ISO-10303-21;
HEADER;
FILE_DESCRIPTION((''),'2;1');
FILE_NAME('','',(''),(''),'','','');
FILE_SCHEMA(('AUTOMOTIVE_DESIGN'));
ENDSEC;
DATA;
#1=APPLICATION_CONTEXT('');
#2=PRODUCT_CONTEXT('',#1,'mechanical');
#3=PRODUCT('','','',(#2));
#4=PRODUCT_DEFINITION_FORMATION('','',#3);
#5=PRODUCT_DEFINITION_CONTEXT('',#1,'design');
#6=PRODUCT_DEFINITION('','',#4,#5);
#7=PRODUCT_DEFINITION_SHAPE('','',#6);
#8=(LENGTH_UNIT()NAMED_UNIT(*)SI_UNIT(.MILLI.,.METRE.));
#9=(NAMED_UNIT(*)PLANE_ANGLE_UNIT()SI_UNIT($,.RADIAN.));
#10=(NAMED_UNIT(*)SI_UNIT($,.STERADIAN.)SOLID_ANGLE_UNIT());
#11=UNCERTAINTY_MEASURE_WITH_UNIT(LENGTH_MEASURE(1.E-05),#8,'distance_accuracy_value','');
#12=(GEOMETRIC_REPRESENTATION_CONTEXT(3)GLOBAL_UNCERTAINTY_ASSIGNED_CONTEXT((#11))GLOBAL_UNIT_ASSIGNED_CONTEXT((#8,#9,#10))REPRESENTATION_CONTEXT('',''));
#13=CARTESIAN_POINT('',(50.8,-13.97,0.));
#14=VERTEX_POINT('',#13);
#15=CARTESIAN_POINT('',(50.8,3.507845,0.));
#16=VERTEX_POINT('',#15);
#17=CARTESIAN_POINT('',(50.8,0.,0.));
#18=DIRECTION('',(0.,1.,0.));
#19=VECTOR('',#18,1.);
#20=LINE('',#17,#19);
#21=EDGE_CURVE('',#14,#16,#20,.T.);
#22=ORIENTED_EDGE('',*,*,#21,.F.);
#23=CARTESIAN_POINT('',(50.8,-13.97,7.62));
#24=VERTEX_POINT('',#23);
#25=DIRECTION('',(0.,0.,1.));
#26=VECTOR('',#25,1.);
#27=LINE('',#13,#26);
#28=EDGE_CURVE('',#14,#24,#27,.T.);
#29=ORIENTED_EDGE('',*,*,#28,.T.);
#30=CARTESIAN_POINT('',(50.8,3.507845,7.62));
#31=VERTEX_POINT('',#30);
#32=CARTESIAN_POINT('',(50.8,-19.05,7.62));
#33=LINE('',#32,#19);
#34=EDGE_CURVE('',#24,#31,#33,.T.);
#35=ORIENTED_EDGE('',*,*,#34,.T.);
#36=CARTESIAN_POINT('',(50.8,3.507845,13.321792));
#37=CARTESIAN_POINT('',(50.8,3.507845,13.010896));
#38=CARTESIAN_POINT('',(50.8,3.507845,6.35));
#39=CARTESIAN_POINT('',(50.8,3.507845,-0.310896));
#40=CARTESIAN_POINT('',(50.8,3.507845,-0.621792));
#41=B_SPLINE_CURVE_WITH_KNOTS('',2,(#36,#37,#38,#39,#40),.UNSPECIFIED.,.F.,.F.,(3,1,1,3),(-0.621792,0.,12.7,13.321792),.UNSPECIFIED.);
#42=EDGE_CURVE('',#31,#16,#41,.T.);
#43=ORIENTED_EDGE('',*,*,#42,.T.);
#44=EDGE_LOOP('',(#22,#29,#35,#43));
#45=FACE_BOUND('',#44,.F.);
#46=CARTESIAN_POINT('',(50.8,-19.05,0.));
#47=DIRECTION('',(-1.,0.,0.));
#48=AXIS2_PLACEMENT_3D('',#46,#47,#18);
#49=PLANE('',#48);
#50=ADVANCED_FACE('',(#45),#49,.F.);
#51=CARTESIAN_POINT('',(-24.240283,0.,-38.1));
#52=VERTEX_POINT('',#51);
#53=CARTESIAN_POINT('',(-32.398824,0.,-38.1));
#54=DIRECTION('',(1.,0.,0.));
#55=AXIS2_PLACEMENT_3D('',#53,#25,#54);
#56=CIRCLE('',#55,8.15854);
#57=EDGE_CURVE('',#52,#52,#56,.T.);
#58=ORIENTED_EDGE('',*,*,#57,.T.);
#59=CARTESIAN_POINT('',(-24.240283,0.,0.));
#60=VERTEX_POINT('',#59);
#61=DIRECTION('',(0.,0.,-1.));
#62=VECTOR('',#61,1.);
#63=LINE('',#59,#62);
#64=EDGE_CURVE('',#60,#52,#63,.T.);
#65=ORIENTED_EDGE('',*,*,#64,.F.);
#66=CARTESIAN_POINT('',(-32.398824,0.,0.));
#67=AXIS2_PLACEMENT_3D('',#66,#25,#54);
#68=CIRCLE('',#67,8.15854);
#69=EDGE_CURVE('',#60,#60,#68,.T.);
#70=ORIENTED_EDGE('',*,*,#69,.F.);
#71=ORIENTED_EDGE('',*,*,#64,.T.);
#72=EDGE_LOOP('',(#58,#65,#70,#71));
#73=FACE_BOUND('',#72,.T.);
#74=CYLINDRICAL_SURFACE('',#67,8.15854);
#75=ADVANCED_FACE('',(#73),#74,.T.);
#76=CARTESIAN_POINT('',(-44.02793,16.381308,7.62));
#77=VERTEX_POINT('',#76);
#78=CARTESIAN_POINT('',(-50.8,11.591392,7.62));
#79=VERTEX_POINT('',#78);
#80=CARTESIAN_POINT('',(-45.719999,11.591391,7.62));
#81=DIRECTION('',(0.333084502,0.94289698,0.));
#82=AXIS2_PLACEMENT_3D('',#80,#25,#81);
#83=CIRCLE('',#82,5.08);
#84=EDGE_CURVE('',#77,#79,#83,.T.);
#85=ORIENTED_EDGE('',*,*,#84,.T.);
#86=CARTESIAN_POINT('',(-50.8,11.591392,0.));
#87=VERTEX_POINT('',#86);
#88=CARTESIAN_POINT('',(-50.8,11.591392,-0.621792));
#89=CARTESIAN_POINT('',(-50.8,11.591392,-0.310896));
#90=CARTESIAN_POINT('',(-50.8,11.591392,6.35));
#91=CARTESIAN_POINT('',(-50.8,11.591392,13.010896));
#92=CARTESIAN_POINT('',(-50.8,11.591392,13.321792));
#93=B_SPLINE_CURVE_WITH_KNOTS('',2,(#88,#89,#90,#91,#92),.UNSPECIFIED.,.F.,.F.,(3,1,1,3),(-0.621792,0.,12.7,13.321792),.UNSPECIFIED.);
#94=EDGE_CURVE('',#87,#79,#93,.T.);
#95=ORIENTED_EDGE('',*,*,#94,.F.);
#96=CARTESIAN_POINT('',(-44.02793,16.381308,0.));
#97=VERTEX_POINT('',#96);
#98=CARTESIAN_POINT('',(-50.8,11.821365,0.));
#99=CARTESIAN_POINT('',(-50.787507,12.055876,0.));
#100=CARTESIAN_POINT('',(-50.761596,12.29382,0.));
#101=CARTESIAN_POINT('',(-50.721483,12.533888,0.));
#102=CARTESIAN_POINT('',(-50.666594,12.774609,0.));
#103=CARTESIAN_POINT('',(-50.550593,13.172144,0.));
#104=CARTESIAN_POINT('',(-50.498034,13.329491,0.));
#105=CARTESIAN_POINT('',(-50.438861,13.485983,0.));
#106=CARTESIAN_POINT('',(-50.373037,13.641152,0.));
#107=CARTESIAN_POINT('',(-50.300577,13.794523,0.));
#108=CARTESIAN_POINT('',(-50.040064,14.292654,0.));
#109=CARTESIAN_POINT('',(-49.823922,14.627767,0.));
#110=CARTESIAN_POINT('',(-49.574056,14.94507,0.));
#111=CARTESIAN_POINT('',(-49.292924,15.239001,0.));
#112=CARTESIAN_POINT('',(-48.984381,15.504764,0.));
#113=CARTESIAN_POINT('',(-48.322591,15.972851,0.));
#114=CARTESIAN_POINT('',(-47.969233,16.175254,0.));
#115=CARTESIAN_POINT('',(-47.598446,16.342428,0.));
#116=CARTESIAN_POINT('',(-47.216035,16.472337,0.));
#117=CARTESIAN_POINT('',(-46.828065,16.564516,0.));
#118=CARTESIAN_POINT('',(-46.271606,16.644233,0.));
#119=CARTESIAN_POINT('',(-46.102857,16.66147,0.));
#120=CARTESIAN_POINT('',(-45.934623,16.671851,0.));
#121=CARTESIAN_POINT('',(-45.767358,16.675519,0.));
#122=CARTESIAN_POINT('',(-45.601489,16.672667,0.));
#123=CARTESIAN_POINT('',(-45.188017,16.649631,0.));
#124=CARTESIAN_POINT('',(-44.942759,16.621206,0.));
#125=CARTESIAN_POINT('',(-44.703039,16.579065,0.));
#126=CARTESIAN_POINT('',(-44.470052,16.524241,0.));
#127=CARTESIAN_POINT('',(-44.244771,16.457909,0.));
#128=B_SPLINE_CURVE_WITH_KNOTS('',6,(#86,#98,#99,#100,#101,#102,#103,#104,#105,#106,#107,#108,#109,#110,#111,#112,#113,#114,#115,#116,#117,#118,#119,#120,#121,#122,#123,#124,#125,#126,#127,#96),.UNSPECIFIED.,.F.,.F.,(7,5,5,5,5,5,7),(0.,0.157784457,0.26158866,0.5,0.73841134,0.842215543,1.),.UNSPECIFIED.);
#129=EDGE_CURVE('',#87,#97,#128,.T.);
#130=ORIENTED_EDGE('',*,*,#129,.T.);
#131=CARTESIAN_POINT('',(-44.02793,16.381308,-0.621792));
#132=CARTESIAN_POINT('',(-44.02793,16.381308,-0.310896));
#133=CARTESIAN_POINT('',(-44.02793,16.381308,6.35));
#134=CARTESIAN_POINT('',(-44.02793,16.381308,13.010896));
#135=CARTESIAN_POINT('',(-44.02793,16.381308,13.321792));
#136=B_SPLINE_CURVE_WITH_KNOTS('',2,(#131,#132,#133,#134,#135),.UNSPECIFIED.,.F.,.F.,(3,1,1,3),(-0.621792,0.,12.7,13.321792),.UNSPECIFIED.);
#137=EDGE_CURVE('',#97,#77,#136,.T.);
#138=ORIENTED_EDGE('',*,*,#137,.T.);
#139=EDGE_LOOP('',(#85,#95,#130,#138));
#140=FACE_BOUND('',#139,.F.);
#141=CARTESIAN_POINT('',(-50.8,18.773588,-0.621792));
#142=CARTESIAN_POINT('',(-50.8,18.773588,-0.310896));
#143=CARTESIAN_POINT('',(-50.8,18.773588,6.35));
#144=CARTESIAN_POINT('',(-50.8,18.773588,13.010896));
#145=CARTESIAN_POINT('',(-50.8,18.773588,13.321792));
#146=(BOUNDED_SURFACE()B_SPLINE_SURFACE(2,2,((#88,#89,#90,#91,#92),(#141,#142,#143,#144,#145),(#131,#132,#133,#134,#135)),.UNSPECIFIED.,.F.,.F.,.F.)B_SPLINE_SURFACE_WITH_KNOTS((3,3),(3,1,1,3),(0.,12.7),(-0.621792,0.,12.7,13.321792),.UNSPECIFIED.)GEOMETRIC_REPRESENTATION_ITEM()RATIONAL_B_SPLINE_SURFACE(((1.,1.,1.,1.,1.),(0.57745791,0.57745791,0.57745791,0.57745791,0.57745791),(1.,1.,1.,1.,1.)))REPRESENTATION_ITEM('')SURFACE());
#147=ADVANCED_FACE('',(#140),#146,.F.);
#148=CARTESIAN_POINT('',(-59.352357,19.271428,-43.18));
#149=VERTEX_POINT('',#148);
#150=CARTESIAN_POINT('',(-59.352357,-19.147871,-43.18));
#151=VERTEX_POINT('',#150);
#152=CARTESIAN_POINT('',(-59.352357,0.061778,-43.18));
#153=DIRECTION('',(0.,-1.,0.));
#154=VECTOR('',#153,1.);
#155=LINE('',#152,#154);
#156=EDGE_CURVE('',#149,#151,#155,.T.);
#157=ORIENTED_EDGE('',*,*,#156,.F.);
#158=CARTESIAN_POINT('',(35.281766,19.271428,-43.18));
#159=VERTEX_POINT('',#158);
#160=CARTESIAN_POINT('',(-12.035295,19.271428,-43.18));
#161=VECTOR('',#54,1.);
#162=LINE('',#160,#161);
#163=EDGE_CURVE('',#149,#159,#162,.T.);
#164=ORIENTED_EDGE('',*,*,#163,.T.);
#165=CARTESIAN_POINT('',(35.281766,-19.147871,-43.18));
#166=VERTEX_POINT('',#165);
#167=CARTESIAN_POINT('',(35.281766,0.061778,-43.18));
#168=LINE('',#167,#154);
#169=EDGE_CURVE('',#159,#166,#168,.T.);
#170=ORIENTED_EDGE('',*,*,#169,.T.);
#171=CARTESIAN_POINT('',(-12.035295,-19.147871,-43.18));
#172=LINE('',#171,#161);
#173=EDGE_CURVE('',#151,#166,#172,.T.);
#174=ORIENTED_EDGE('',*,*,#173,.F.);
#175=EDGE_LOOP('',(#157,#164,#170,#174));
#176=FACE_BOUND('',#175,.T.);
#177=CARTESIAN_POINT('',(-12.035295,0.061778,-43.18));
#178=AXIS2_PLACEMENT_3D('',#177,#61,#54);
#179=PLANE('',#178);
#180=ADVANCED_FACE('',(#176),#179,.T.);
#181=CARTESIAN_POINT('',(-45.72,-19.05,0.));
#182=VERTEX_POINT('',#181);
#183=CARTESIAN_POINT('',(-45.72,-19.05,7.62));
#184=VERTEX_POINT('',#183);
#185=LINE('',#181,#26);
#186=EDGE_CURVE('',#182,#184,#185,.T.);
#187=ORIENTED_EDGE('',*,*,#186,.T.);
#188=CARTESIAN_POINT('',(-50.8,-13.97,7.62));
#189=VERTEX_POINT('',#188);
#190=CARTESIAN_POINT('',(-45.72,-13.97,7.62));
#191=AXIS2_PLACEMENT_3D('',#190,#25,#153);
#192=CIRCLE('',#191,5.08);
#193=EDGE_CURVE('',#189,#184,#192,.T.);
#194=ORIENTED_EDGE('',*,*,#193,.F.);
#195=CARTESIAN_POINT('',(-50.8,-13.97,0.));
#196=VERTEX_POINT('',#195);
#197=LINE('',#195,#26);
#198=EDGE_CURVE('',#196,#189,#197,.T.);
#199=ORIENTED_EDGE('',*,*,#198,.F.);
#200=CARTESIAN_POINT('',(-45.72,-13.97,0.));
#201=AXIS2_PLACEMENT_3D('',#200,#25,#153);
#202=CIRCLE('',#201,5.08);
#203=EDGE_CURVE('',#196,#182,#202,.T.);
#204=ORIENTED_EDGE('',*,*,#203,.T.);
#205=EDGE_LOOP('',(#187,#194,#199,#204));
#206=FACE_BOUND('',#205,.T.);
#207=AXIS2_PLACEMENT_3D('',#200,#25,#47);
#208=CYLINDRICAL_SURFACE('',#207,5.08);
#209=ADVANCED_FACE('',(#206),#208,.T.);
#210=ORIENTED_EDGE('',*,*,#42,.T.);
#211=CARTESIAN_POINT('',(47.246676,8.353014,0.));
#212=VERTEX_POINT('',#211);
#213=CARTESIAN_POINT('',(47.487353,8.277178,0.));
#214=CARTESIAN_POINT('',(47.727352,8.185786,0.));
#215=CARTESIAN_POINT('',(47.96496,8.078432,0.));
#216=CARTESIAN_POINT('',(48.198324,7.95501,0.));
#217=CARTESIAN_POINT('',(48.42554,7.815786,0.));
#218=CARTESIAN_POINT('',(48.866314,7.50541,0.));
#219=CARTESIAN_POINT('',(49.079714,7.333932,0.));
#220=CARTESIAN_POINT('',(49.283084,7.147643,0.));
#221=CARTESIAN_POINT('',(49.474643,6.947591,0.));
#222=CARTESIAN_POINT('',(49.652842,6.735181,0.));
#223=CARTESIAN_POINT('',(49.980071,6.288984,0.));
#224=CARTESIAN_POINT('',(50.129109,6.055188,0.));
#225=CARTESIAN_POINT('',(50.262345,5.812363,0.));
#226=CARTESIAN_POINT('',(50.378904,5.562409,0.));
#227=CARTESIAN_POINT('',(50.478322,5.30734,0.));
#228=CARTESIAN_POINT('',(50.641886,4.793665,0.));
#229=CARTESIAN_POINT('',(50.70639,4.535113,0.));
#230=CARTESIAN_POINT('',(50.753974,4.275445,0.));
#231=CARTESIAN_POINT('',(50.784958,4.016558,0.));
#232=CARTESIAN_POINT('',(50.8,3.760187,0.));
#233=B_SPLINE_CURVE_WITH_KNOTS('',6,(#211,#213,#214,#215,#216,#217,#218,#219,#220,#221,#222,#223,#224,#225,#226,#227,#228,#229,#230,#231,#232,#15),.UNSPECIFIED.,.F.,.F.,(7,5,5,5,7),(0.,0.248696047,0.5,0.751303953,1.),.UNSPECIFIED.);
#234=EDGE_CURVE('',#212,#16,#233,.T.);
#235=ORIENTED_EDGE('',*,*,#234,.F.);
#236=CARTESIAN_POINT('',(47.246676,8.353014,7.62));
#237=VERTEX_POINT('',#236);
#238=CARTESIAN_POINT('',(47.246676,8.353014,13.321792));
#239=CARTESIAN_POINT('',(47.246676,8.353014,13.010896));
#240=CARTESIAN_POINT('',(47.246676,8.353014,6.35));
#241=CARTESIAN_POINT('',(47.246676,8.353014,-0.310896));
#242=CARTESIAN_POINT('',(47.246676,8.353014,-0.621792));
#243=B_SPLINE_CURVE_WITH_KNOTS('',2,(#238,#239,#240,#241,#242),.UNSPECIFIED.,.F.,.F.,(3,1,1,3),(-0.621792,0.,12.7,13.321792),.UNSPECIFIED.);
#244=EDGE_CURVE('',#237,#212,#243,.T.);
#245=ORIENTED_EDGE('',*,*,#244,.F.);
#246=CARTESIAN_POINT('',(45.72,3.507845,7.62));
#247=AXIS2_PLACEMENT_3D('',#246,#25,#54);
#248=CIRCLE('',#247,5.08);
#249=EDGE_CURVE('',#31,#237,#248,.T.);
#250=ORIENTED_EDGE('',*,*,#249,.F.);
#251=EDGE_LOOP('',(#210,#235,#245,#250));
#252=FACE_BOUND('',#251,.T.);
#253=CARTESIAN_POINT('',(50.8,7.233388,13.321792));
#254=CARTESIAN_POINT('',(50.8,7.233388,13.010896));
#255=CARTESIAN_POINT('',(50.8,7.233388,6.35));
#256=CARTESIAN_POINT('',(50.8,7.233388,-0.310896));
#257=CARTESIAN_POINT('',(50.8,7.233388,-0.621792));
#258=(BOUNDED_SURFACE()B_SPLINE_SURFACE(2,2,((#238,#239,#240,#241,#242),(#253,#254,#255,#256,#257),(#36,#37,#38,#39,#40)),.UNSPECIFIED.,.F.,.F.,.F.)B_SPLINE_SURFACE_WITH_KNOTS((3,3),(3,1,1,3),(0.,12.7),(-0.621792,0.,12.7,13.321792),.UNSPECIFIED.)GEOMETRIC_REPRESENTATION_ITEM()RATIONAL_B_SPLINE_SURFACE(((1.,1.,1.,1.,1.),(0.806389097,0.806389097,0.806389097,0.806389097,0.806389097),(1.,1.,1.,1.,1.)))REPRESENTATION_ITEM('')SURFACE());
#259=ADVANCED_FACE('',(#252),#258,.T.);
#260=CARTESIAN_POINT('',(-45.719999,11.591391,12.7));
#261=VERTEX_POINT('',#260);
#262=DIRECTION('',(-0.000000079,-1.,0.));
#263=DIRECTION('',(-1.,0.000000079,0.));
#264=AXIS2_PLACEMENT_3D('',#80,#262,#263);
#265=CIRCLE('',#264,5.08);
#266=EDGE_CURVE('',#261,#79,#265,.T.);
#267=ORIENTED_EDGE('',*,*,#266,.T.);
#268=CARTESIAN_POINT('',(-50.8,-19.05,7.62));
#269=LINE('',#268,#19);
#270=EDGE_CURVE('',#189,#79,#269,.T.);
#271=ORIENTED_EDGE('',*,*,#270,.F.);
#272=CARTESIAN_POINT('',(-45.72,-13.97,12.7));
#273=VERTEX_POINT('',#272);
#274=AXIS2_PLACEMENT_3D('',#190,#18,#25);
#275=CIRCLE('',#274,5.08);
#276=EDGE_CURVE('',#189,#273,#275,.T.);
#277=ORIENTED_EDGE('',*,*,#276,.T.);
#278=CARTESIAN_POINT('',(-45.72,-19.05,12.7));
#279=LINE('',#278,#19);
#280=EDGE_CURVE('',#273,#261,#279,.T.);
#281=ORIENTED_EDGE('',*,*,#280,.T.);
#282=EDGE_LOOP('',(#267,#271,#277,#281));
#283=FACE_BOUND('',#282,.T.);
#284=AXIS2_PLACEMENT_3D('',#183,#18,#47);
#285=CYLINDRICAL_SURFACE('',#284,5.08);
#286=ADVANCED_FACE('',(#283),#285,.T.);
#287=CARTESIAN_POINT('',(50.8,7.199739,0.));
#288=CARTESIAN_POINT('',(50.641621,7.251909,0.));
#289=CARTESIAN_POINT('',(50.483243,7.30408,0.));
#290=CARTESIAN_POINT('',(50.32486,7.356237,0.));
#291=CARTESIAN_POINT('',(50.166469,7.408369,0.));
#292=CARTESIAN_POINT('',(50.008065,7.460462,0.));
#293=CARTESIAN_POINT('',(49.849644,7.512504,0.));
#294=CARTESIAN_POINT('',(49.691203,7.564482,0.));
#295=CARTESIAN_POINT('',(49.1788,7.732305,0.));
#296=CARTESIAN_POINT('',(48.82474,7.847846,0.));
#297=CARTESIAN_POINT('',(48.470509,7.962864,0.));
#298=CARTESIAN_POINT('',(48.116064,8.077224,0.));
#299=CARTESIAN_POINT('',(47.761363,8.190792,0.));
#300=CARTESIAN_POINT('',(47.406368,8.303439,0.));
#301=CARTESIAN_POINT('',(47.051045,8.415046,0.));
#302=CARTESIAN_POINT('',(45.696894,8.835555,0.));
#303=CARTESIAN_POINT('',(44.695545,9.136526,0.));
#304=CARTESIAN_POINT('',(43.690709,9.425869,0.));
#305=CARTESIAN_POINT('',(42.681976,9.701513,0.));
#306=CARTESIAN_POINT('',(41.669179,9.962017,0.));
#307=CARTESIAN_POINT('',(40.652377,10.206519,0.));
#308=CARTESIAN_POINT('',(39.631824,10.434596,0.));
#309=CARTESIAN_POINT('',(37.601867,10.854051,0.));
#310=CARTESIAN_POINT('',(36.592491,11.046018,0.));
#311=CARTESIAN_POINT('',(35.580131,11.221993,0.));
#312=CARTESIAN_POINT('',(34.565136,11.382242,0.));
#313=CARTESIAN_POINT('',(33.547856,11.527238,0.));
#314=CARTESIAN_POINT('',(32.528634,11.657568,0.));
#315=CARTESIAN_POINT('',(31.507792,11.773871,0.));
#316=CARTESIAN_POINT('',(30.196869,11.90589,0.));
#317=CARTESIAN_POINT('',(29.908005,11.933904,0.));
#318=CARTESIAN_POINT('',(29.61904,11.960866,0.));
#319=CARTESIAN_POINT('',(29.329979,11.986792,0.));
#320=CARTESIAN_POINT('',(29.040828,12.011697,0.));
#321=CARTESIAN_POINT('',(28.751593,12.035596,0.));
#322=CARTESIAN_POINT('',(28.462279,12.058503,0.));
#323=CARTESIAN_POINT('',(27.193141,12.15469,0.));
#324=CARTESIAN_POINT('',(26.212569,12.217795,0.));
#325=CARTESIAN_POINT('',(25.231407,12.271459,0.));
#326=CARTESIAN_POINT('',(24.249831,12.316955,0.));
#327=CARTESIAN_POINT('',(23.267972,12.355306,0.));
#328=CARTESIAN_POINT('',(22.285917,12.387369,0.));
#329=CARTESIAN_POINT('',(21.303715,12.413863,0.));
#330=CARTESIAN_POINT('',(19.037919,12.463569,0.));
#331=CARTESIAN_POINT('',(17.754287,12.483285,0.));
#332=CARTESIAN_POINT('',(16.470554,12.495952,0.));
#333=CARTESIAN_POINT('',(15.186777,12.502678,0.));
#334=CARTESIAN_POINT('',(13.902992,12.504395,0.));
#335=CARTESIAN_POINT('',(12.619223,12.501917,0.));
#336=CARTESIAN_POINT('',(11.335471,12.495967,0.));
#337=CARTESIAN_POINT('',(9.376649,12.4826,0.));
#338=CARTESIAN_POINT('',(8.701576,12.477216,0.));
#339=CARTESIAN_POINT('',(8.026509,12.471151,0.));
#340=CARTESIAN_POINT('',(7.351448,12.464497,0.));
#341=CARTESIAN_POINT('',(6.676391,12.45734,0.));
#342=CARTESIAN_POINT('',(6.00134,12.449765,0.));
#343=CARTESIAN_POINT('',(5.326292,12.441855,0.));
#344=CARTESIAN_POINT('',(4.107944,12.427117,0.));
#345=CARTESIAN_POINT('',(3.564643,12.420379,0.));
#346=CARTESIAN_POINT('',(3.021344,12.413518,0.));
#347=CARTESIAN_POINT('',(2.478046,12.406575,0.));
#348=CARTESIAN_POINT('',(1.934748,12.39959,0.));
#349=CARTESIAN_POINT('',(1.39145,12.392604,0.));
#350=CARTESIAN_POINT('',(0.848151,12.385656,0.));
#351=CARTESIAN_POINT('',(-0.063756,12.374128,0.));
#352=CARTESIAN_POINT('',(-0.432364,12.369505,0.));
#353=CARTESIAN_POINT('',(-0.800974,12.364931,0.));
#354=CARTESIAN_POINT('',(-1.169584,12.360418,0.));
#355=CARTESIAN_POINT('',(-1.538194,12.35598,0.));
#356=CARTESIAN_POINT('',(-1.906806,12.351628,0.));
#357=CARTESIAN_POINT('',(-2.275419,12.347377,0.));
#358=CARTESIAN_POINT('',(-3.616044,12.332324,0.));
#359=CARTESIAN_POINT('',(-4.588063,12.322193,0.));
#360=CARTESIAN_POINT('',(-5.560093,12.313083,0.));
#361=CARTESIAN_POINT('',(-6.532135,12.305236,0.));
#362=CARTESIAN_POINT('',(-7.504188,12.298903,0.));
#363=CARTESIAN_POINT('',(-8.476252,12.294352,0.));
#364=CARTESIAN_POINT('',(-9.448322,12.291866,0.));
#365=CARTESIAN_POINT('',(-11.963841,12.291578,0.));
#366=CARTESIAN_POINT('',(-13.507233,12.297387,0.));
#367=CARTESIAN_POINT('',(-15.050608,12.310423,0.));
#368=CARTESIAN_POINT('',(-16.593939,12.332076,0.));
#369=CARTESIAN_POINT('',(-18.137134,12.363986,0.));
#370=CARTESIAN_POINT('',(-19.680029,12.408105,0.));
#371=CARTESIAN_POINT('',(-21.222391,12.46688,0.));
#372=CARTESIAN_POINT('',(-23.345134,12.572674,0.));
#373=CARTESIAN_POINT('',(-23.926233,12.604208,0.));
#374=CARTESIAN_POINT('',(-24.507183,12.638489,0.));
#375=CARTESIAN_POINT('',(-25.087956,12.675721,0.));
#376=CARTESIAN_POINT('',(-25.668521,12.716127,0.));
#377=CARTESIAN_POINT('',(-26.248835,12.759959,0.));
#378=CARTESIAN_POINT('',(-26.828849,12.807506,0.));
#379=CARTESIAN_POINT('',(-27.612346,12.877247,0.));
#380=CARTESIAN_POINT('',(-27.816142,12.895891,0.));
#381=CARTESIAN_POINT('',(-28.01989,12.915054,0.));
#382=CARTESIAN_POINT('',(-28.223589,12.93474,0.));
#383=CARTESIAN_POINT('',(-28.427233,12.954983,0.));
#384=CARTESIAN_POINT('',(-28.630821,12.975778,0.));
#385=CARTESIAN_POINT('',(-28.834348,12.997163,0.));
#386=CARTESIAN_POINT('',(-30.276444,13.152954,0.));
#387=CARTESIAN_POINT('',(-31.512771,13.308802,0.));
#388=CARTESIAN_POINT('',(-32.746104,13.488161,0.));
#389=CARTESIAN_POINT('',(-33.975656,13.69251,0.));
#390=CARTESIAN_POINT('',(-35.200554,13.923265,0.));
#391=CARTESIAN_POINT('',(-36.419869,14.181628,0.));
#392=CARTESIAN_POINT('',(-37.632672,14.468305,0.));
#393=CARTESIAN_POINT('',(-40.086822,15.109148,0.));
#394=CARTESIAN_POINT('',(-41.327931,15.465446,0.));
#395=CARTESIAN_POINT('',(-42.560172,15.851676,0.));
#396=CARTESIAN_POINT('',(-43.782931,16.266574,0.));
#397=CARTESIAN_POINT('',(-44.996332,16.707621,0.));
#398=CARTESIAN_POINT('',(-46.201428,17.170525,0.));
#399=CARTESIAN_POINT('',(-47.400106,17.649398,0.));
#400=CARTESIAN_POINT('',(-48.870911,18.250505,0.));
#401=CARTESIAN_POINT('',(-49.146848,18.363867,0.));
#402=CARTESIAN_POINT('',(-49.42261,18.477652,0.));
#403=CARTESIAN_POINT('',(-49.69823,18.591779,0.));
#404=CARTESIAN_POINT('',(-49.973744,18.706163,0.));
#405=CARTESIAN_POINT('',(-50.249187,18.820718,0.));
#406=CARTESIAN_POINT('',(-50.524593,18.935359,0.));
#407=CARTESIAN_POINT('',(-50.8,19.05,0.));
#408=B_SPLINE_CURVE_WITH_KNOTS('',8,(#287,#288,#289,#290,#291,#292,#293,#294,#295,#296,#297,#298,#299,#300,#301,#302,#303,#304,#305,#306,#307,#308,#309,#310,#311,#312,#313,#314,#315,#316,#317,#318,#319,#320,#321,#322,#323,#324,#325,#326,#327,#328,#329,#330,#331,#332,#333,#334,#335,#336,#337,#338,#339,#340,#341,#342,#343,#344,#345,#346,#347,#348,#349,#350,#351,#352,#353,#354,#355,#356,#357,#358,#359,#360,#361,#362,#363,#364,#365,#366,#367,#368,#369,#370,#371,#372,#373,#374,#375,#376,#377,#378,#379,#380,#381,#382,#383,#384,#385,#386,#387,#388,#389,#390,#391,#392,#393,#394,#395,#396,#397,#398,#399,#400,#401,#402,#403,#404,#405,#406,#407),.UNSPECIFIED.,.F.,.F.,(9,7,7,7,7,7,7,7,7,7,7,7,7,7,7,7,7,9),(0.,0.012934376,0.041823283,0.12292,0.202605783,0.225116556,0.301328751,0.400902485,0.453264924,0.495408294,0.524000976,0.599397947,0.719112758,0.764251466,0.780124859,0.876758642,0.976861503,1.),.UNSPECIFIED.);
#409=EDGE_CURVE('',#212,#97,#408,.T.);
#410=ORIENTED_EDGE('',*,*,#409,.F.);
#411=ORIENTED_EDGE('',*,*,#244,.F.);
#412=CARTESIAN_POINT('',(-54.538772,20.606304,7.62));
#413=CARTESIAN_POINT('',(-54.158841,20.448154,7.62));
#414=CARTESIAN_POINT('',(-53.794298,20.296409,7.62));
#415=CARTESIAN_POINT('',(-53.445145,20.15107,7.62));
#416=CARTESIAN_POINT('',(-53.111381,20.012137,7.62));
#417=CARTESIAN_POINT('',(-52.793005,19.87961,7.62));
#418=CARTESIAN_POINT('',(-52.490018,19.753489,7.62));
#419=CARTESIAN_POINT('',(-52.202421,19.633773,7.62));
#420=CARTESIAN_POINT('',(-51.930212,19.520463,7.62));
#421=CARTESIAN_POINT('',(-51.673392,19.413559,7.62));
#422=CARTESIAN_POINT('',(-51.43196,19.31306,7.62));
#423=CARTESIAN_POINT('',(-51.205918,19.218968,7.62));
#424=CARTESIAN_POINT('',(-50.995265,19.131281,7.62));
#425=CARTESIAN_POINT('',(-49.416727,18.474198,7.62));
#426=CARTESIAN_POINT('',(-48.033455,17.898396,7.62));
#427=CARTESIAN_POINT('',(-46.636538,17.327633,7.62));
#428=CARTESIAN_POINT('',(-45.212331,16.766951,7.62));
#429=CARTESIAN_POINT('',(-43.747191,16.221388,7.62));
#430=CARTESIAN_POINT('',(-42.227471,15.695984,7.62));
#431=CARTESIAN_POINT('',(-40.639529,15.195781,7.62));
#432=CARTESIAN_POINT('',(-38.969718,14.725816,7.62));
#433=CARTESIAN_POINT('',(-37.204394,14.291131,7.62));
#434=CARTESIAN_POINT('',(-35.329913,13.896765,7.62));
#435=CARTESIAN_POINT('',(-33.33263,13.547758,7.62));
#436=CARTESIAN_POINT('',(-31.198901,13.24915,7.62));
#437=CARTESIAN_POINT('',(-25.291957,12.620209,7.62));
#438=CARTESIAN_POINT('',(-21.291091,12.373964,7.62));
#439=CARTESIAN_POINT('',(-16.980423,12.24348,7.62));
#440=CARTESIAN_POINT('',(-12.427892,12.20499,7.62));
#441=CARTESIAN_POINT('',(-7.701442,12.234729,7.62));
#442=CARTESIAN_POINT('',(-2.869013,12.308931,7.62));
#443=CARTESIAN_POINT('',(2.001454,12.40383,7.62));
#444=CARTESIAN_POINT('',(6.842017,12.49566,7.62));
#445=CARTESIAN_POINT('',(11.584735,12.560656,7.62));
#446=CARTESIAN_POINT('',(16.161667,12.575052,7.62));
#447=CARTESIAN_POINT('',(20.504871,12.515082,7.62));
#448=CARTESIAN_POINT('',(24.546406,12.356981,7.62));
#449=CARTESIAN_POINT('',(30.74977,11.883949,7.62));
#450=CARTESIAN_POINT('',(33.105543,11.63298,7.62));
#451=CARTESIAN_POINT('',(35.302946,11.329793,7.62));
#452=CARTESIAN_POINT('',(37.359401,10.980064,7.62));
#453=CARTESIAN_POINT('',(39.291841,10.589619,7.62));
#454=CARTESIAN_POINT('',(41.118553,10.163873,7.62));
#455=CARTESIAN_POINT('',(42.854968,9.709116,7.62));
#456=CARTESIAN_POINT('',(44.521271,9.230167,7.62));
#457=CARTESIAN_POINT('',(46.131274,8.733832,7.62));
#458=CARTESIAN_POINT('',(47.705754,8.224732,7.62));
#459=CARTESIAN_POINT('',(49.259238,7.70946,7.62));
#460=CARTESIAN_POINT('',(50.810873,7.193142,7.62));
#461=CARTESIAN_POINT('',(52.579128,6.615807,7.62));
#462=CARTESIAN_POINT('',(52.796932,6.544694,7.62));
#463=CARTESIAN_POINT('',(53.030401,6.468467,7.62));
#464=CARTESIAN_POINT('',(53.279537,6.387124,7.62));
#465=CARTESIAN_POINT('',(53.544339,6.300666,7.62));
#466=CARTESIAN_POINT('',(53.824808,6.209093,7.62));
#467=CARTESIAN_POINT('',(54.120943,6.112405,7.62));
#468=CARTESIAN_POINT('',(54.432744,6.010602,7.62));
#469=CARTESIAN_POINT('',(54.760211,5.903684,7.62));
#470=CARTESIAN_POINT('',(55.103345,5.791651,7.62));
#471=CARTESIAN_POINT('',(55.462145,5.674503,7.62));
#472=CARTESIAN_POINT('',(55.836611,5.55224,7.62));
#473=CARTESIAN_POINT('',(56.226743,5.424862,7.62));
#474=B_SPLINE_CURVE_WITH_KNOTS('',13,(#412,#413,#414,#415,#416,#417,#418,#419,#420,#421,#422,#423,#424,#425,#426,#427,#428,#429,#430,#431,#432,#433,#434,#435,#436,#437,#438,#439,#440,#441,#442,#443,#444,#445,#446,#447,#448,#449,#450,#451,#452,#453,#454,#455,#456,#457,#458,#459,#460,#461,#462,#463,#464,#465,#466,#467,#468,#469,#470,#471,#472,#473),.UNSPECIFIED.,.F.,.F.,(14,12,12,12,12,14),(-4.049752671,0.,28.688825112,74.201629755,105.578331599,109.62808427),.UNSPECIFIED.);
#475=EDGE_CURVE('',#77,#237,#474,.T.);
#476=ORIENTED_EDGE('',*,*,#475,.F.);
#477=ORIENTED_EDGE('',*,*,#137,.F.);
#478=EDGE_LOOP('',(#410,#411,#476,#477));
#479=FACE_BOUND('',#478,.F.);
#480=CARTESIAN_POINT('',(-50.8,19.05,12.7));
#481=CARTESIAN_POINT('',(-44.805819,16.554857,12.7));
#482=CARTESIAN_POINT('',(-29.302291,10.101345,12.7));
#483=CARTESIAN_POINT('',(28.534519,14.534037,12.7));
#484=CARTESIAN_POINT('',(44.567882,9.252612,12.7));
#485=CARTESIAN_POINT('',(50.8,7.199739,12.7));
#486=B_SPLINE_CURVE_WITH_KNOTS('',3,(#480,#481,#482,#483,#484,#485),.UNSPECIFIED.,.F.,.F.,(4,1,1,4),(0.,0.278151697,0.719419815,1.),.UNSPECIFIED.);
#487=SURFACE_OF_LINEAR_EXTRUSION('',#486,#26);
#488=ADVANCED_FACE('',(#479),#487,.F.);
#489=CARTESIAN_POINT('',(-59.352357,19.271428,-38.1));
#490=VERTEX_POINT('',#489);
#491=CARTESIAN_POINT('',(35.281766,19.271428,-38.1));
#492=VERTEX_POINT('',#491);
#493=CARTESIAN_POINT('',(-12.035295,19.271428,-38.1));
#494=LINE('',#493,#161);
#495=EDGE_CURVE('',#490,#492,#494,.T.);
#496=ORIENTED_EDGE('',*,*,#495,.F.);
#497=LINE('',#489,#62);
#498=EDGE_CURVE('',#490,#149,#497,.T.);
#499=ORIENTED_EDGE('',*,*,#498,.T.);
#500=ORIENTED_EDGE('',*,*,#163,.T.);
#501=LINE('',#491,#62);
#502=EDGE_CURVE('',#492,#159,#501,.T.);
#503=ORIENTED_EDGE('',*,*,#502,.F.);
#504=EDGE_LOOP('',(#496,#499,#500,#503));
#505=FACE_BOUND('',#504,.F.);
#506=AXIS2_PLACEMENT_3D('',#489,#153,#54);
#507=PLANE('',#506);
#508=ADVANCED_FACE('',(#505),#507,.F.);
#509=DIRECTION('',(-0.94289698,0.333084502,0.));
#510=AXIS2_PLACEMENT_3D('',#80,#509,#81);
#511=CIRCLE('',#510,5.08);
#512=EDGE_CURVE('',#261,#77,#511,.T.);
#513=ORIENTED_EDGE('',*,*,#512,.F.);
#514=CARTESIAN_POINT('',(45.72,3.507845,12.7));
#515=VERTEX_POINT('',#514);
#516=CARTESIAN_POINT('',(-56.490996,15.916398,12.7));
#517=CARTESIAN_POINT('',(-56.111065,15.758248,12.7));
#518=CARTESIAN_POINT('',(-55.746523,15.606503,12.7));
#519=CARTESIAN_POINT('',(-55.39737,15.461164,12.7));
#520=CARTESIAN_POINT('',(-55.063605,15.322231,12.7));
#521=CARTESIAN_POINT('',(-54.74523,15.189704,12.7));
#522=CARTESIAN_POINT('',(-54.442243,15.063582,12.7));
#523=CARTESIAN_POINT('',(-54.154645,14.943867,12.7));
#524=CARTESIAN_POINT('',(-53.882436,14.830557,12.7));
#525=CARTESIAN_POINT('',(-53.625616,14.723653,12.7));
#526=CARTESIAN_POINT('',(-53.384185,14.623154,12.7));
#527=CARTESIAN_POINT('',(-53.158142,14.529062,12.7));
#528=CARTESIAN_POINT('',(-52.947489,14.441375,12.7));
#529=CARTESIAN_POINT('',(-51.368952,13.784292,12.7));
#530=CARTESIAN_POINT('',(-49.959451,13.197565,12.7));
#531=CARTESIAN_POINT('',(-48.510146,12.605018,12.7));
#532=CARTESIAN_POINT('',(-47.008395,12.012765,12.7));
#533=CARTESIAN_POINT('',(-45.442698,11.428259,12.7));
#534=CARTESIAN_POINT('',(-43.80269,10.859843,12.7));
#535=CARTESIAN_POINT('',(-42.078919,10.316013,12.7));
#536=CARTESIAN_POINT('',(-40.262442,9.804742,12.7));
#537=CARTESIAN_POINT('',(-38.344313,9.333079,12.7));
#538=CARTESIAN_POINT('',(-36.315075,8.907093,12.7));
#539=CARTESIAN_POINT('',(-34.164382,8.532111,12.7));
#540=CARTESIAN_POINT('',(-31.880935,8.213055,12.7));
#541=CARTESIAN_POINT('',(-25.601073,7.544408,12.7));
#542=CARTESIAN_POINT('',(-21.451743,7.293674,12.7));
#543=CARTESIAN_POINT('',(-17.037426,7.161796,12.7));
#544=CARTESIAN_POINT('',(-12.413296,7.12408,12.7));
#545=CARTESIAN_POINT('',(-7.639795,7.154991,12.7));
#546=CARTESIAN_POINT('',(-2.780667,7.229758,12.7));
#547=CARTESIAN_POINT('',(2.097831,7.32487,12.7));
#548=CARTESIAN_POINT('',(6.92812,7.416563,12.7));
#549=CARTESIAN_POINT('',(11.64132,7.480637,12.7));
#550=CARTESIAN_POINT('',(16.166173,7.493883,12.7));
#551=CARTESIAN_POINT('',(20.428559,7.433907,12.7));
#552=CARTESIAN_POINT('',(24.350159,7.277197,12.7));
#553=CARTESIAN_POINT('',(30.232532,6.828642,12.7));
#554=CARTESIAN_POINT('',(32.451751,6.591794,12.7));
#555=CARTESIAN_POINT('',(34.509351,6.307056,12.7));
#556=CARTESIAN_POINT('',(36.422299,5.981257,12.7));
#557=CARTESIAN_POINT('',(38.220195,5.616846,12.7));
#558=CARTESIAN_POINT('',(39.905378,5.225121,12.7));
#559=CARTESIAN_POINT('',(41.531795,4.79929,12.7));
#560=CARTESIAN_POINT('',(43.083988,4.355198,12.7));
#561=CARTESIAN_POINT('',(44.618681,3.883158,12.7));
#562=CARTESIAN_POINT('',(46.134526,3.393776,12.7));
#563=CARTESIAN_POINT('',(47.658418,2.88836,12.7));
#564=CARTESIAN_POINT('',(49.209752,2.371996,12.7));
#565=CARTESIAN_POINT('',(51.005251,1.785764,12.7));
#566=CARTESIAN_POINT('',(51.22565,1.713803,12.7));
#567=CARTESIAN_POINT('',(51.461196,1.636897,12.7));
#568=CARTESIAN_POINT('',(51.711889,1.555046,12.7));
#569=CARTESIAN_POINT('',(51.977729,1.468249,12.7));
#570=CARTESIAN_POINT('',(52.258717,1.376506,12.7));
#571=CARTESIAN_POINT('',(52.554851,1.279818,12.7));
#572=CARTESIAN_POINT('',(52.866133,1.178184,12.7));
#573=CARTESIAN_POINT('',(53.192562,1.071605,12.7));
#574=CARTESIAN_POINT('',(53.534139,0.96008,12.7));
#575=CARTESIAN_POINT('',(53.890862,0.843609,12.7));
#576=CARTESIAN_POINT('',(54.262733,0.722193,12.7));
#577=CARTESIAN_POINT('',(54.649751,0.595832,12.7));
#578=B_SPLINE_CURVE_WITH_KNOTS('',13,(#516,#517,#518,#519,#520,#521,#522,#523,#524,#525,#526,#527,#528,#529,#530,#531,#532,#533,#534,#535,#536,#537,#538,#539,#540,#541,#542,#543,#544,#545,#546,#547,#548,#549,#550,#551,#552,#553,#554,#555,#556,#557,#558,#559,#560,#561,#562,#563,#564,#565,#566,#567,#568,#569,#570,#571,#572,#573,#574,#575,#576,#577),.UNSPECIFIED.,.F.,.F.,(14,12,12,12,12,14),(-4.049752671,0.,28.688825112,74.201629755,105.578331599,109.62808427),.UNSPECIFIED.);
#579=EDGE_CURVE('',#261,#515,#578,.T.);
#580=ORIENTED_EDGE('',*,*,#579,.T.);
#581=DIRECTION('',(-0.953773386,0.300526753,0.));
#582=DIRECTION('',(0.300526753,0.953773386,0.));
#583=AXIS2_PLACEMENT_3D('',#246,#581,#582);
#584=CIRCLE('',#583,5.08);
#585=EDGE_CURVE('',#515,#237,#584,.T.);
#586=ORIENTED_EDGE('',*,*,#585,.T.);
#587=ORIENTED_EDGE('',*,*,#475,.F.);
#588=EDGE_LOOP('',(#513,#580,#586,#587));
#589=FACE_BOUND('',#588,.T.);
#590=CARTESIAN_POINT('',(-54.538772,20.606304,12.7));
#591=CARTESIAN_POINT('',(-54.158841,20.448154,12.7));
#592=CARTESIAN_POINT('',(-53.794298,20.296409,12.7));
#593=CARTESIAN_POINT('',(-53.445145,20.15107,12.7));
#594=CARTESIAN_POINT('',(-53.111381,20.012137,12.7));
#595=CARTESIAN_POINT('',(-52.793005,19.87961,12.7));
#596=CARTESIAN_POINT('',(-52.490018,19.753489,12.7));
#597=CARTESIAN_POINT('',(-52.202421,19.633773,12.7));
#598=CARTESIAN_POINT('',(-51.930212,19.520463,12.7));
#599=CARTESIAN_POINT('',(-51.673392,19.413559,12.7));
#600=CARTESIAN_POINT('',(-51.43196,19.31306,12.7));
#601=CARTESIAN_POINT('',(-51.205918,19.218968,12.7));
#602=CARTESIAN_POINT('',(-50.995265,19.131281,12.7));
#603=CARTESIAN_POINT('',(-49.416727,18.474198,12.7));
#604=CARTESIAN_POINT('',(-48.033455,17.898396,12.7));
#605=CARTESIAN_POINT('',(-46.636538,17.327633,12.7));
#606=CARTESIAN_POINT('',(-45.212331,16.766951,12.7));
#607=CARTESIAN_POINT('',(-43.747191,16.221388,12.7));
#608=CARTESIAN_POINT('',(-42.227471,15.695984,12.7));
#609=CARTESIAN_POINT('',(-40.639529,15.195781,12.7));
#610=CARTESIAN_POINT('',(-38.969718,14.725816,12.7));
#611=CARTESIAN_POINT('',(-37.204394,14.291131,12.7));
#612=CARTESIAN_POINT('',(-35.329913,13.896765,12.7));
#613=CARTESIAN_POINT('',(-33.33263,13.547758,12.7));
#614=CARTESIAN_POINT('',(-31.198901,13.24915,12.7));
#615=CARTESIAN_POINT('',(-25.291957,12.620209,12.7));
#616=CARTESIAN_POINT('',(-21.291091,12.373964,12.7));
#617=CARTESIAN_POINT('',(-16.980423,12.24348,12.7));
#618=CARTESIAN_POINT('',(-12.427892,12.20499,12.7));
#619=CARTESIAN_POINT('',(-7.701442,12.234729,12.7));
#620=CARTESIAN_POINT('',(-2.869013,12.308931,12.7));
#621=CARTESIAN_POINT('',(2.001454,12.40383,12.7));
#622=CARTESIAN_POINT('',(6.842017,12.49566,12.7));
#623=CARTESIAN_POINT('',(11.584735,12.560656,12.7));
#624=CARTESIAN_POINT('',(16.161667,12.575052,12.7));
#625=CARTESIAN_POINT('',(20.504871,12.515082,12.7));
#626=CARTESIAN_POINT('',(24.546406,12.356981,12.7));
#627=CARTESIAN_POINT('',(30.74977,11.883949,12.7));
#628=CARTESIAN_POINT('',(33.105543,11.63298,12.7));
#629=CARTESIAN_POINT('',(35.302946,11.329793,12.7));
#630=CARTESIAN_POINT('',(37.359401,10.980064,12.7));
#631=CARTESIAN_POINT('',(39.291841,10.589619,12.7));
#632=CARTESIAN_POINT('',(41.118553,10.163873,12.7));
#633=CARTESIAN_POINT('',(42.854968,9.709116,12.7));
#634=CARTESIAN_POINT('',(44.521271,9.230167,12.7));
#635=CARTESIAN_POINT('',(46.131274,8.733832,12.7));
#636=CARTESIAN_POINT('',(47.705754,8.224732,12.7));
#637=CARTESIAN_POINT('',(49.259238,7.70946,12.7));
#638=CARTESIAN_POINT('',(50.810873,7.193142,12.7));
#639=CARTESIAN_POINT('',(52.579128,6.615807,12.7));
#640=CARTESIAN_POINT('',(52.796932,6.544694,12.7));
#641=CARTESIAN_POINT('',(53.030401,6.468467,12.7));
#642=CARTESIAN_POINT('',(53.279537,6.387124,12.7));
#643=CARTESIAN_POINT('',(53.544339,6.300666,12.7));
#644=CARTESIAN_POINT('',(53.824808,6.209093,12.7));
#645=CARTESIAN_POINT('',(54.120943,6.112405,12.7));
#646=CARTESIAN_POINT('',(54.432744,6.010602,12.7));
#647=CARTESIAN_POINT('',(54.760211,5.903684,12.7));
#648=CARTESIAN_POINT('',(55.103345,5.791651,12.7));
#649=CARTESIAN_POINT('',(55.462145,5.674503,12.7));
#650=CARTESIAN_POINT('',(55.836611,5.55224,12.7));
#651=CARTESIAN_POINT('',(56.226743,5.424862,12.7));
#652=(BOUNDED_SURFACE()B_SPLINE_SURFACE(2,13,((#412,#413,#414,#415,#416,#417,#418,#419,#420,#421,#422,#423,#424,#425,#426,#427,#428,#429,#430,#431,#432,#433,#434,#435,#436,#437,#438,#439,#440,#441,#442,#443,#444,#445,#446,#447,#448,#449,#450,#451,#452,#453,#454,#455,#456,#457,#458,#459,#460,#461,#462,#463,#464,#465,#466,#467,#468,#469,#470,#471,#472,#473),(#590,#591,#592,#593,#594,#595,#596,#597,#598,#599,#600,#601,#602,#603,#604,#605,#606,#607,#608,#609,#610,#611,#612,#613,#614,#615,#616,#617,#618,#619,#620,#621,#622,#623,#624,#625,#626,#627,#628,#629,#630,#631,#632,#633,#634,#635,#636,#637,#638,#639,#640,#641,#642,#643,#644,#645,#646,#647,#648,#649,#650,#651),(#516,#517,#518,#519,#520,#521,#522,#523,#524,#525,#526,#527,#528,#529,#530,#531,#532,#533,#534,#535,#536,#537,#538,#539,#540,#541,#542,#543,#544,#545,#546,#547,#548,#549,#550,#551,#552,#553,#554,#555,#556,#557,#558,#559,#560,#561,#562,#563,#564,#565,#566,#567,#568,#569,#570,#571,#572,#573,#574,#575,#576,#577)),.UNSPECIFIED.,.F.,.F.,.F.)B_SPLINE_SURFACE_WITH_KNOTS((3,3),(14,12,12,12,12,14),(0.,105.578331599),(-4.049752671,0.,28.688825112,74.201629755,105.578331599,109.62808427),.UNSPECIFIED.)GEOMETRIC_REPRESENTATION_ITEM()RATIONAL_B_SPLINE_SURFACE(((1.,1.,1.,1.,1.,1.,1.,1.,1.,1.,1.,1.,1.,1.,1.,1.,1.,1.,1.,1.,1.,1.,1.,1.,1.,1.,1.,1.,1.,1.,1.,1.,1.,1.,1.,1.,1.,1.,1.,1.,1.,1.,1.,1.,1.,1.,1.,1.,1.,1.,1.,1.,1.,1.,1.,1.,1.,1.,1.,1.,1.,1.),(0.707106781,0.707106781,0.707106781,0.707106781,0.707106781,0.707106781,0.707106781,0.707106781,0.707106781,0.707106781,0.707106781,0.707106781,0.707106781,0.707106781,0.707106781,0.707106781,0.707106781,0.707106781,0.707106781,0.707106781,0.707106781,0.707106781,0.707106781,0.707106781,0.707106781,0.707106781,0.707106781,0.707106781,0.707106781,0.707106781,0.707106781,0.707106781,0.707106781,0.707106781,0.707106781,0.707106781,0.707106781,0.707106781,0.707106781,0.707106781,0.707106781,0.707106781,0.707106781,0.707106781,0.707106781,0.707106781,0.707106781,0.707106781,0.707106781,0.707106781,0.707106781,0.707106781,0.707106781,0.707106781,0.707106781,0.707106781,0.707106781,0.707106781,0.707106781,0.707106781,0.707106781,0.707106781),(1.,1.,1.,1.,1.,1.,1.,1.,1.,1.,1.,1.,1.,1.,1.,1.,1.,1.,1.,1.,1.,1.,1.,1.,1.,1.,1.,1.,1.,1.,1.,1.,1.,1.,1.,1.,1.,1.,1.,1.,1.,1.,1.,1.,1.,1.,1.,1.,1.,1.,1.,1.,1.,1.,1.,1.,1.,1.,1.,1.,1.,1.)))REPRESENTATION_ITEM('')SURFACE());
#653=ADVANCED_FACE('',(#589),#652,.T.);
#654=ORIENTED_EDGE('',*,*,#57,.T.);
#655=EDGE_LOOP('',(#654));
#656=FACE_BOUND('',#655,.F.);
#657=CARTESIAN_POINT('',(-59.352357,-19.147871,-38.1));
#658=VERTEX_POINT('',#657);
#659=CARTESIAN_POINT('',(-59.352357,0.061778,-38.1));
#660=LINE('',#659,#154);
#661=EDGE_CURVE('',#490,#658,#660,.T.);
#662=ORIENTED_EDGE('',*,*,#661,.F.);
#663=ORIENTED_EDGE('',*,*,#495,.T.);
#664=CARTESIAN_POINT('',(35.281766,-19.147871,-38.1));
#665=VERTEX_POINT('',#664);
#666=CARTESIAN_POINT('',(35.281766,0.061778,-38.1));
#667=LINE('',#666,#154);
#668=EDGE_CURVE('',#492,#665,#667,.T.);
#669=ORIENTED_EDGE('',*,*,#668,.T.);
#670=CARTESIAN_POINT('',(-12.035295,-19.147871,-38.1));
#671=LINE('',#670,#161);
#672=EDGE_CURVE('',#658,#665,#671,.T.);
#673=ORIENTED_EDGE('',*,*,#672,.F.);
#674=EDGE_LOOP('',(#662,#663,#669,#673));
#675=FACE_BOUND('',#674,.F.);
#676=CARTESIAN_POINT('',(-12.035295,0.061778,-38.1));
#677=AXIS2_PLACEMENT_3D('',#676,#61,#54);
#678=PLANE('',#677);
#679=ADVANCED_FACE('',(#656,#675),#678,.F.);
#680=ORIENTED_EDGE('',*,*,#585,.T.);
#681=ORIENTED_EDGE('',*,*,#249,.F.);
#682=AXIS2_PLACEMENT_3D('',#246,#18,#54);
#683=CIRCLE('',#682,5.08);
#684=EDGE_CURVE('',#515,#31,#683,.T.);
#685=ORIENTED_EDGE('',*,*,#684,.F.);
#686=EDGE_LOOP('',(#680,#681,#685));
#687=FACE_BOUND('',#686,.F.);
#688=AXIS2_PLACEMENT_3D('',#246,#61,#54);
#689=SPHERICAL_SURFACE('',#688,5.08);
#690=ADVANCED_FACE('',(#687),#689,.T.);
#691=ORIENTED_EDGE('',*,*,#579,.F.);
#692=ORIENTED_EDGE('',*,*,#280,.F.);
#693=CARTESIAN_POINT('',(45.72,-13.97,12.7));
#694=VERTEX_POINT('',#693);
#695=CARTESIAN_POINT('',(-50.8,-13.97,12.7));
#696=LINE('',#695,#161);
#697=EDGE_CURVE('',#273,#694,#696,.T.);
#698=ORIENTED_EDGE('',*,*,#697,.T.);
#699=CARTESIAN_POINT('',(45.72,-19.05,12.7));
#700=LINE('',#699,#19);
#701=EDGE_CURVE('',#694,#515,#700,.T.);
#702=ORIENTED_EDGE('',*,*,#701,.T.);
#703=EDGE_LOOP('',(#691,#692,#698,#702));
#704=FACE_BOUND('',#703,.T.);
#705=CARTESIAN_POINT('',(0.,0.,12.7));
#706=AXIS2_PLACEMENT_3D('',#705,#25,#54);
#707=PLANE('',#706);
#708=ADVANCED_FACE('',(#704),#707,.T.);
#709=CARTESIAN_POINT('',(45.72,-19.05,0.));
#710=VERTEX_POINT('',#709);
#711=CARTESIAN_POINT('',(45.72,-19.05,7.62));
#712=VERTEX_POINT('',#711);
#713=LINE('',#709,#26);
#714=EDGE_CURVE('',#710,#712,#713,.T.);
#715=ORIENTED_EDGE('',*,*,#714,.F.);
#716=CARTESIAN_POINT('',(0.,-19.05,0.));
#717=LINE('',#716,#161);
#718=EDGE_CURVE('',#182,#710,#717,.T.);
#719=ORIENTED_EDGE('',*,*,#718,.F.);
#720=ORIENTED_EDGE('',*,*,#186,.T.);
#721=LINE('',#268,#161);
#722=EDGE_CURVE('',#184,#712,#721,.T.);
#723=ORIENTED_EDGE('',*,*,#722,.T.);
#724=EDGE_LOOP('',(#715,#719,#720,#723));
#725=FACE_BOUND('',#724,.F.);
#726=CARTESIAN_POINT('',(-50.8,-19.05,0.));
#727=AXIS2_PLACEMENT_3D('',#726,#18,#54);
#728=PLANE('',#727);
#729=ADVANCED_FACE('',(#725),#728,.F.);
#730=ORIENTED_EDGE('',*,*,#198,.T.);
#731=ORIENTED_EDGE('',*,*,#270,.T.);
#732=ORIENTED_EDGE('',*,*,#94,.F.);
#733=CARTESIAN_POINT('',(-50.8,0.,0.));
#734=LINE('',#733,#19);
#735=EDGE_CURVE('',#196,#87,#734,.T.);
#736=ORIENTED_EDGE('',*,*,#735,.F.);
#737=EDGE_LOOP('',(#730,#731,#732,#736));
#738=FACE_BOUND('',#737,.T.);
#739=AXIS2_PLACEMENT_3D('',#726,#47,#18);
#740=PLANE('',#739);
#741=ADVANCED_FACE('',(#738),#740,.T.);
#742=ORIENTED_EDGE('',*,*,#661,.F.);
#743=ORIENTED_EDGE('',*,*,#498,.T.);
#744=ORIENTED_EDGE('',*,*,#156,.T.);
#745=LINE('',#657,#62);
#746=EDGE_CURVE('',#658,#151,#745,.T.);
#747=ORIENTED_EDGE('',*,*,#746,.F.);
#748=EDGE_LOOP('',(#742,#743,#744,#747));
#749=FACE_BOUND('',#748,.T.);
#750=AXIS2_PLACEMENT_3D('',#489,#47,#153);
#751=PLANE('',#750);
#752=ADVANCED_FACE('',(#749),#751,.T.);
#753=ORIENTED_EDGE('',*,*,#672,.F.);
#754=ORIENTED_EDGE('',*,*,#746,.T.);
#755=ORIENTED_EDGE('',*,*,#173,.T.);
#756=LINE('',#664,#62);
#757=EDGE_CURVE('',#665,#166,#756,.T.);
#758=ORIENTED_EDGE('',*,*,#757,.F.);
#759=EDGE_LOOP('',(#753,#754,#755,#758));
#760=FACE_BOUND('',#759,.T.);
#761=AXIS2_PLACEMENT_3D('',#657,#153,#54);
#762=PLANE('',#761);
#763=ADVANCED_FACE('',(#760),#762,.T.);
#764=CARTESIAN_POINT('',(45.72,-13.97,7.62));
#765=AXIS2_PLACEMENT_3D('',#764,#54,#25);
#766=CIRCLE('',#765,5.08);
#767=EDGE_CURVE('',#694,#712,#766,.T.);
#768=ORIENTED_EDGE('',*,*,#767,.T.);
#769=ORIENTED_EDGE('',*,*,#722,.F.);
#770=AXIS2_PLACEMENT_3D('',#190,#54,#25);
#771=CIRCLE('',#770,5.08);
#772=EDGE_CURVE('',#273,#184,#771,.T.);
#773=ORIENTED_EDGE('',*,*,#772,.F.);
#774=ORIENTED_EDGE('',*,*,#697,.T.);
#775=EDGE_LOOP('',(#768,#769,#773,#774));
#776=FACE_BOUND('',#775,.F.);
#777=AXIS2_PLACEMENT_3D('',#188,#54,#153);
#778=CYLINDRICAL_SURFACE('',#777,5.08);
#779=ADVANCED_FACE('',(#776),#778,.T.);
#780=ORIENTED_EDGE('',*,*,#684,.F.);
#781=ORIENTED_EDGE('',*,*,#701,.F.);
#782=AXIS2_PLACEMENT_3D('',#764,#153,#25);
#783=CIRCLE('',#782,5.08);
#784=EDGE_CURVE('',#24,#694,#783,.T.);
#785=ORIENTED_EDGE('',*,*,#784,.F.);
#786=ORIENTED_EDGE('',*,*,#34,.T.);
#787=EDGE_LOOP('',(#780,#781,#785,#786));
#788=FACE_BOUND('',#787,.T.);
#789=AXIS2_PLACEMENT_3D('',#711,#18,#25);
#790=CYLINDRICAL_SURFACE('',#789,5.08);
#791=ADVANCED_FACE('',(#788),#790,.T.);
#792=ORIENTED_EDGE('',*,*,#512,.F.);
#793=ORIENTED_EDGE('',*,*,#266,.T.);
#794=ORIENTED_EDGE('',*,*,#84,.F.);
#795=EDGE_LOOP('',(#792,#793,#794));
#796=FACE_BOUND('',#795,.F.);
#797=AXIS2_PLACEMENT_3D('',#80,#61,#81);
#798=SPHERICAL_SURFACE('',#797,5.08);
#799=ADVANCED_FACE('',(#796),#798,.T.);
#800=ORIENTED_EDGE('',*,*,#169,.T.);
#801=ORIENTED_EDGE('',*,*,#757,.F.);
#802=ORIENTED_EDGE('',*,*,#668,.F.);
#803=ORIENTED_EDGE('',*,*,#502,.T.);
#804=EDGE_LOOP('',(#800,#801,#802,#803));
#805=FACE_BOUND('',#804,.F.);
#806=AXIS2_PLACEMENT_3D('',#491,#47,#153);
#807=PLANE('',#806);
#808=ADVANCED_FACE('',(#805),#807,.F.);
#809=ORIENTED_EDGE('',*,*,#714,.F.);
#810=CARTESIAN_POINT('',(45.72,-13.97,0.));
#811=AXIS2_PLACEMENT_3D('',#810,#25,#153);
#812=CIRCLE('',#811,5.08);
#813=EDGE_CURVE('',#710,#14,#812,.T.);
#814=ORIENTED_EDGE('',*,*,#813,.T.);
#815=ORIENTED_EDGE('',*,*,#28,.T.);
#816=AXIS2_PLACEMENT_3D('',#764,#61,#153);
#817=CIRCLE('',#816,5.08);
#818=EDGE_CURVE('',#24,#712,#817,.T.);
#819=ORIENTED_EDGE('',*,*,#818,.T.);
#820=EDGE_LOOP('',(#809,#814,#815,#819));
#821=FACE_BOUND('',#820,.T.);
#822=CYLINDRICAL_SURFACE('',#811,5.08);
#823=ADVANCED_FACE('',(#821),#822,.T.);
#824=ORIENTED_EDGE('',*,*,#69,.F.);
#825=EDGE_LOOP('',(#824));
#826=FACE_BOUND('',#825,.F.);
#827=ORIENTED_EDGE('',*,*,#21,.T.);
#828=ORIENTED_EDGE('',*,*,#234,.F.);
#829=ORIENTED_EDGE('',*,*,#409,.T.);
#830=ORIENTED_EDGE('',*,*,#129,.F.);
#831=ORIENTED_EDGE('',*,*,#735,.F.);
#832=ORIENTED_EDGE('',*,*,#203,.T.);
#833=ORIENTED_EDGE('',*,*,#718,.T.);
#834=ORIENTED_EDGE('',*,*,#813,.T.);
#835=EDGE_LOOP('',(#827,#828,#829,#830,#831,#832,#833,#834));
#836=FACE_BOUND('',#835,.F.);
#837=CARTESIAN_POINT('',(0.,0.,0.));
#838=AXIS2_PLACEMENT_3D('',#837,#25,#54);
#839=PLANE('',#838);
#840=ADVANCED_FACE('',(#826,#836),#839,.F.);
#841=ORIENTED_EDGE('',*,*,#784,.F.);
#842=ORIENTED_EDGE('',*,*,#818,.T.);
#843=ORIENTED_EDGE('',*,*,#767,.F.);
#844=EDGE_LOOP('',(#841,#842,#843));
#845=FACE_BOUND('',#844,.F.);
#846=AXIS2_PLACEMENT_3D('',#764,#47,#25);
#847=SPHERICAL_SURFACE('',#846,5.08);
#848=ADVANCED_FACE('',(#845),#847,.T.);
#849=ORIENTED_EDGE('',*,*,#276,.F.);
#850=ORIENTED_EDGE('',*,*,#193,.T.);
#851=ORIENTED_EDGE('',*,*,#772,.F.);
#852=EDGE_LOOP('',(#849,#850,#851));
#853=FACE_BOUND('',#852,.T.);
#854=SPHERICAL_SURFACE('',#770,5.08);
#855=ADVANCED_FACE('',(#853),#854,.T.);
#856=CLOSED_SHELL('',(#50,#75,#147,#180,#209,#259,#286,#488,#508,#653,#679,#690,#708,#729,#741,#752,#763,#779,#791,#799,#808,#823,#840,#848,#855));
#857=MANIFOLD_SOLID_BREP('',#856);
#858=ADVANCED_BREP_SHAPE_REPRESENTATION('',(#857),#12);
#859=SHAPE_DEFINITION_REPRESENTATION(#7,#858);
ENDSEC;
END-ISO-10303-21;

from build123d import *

# Parameters (mm, degrees)
F0_W     = 101.6
F0_H     = 38.1
F1_DEPTH = 12.7
F3_DEPTH = 25.4
F4_R     = 5.08
F5_R     = 8.1585403427
F6_DEPTH = 38.1
F7_W     = 94.6341231465
F7_H     = 38.4192988276
F8_DEPTH = 5.08


# Not quite as in the source:
# - two fillets or chamfers of one size are made in one step


with BuildPart() as f1:
    # F0 (on Top) → F1 (new body)
    with BuildSketch(Plane.XY):
        Rectangle(F0_W, F0_H)
    extrude(amount=F1_DEPTH)

    # F2 (on face) → F3 (cut)
    with BuildSketch(Plane.XY.offset(12.7)):
        with BuildLine():
            Line((-50.8, 29.4957049191), (-50.8, 19.05))
            add(Edge.make_bspline(
                [(-50.8, 19.05), (-44.8058190597, 16.5548569949), (-29.3022913601, 10.1013449841), (28.5345191575, 14.5340371651), (44.5678818935, 9.2526124329), (50.8, 7.199739106)],
                knots=[0, 0, 0, 0, 0.2781516974, 0.7194198154, 1, 1, 1, 1], degree=3))
            Line((50.8, 7.199739106), (51.4432899654, 29.4957049191))
            Line((51.4432899654, 29.4957049191), (-50.8, 29.4957049191))
        make_face()
    extrude(amount=-F3_DEPTH, mode=Mode.SUBTRACT)

    # F4
    f4_edges = [f1.edges().sort_by_distance(p)[0] for p in [
        (0, -19.05, 12.7),
        (50.8, -5.92513, 12.7),
        (-0.16927, 12.372824, 12.7),
        (-50.8, 0, 12.7),
        (-50.8, 19.05, 6.35),
        (-50.8, -19.05, 6.35),
        (50.8, 7.199739, 6.35),
        (50.8, -19.05, 6.35),
    ]]
    fillet(f4_edges, radius=F4_R)

    # F5 (on Top) → F6 (join)
    with BuildSketch(Plane.XY):
        with Locations((-32.3988236487, 0)):
            Circle(F5_R)
    extrude(amount=-F6_DEPTH)

    # F7 (on face) → F8 (join)
    with BuildSketch(Plane(origin=(0, 0, -38.1), x_dir=(1, 0, 0), z_dir=(0, 0, -1))):
        with Locations((-12.0352953672, -0.0617783517)):
            Rectangle(F7_W, F7_H)
    extrude(amount=F8_DEPTH)


solid = f1.part
